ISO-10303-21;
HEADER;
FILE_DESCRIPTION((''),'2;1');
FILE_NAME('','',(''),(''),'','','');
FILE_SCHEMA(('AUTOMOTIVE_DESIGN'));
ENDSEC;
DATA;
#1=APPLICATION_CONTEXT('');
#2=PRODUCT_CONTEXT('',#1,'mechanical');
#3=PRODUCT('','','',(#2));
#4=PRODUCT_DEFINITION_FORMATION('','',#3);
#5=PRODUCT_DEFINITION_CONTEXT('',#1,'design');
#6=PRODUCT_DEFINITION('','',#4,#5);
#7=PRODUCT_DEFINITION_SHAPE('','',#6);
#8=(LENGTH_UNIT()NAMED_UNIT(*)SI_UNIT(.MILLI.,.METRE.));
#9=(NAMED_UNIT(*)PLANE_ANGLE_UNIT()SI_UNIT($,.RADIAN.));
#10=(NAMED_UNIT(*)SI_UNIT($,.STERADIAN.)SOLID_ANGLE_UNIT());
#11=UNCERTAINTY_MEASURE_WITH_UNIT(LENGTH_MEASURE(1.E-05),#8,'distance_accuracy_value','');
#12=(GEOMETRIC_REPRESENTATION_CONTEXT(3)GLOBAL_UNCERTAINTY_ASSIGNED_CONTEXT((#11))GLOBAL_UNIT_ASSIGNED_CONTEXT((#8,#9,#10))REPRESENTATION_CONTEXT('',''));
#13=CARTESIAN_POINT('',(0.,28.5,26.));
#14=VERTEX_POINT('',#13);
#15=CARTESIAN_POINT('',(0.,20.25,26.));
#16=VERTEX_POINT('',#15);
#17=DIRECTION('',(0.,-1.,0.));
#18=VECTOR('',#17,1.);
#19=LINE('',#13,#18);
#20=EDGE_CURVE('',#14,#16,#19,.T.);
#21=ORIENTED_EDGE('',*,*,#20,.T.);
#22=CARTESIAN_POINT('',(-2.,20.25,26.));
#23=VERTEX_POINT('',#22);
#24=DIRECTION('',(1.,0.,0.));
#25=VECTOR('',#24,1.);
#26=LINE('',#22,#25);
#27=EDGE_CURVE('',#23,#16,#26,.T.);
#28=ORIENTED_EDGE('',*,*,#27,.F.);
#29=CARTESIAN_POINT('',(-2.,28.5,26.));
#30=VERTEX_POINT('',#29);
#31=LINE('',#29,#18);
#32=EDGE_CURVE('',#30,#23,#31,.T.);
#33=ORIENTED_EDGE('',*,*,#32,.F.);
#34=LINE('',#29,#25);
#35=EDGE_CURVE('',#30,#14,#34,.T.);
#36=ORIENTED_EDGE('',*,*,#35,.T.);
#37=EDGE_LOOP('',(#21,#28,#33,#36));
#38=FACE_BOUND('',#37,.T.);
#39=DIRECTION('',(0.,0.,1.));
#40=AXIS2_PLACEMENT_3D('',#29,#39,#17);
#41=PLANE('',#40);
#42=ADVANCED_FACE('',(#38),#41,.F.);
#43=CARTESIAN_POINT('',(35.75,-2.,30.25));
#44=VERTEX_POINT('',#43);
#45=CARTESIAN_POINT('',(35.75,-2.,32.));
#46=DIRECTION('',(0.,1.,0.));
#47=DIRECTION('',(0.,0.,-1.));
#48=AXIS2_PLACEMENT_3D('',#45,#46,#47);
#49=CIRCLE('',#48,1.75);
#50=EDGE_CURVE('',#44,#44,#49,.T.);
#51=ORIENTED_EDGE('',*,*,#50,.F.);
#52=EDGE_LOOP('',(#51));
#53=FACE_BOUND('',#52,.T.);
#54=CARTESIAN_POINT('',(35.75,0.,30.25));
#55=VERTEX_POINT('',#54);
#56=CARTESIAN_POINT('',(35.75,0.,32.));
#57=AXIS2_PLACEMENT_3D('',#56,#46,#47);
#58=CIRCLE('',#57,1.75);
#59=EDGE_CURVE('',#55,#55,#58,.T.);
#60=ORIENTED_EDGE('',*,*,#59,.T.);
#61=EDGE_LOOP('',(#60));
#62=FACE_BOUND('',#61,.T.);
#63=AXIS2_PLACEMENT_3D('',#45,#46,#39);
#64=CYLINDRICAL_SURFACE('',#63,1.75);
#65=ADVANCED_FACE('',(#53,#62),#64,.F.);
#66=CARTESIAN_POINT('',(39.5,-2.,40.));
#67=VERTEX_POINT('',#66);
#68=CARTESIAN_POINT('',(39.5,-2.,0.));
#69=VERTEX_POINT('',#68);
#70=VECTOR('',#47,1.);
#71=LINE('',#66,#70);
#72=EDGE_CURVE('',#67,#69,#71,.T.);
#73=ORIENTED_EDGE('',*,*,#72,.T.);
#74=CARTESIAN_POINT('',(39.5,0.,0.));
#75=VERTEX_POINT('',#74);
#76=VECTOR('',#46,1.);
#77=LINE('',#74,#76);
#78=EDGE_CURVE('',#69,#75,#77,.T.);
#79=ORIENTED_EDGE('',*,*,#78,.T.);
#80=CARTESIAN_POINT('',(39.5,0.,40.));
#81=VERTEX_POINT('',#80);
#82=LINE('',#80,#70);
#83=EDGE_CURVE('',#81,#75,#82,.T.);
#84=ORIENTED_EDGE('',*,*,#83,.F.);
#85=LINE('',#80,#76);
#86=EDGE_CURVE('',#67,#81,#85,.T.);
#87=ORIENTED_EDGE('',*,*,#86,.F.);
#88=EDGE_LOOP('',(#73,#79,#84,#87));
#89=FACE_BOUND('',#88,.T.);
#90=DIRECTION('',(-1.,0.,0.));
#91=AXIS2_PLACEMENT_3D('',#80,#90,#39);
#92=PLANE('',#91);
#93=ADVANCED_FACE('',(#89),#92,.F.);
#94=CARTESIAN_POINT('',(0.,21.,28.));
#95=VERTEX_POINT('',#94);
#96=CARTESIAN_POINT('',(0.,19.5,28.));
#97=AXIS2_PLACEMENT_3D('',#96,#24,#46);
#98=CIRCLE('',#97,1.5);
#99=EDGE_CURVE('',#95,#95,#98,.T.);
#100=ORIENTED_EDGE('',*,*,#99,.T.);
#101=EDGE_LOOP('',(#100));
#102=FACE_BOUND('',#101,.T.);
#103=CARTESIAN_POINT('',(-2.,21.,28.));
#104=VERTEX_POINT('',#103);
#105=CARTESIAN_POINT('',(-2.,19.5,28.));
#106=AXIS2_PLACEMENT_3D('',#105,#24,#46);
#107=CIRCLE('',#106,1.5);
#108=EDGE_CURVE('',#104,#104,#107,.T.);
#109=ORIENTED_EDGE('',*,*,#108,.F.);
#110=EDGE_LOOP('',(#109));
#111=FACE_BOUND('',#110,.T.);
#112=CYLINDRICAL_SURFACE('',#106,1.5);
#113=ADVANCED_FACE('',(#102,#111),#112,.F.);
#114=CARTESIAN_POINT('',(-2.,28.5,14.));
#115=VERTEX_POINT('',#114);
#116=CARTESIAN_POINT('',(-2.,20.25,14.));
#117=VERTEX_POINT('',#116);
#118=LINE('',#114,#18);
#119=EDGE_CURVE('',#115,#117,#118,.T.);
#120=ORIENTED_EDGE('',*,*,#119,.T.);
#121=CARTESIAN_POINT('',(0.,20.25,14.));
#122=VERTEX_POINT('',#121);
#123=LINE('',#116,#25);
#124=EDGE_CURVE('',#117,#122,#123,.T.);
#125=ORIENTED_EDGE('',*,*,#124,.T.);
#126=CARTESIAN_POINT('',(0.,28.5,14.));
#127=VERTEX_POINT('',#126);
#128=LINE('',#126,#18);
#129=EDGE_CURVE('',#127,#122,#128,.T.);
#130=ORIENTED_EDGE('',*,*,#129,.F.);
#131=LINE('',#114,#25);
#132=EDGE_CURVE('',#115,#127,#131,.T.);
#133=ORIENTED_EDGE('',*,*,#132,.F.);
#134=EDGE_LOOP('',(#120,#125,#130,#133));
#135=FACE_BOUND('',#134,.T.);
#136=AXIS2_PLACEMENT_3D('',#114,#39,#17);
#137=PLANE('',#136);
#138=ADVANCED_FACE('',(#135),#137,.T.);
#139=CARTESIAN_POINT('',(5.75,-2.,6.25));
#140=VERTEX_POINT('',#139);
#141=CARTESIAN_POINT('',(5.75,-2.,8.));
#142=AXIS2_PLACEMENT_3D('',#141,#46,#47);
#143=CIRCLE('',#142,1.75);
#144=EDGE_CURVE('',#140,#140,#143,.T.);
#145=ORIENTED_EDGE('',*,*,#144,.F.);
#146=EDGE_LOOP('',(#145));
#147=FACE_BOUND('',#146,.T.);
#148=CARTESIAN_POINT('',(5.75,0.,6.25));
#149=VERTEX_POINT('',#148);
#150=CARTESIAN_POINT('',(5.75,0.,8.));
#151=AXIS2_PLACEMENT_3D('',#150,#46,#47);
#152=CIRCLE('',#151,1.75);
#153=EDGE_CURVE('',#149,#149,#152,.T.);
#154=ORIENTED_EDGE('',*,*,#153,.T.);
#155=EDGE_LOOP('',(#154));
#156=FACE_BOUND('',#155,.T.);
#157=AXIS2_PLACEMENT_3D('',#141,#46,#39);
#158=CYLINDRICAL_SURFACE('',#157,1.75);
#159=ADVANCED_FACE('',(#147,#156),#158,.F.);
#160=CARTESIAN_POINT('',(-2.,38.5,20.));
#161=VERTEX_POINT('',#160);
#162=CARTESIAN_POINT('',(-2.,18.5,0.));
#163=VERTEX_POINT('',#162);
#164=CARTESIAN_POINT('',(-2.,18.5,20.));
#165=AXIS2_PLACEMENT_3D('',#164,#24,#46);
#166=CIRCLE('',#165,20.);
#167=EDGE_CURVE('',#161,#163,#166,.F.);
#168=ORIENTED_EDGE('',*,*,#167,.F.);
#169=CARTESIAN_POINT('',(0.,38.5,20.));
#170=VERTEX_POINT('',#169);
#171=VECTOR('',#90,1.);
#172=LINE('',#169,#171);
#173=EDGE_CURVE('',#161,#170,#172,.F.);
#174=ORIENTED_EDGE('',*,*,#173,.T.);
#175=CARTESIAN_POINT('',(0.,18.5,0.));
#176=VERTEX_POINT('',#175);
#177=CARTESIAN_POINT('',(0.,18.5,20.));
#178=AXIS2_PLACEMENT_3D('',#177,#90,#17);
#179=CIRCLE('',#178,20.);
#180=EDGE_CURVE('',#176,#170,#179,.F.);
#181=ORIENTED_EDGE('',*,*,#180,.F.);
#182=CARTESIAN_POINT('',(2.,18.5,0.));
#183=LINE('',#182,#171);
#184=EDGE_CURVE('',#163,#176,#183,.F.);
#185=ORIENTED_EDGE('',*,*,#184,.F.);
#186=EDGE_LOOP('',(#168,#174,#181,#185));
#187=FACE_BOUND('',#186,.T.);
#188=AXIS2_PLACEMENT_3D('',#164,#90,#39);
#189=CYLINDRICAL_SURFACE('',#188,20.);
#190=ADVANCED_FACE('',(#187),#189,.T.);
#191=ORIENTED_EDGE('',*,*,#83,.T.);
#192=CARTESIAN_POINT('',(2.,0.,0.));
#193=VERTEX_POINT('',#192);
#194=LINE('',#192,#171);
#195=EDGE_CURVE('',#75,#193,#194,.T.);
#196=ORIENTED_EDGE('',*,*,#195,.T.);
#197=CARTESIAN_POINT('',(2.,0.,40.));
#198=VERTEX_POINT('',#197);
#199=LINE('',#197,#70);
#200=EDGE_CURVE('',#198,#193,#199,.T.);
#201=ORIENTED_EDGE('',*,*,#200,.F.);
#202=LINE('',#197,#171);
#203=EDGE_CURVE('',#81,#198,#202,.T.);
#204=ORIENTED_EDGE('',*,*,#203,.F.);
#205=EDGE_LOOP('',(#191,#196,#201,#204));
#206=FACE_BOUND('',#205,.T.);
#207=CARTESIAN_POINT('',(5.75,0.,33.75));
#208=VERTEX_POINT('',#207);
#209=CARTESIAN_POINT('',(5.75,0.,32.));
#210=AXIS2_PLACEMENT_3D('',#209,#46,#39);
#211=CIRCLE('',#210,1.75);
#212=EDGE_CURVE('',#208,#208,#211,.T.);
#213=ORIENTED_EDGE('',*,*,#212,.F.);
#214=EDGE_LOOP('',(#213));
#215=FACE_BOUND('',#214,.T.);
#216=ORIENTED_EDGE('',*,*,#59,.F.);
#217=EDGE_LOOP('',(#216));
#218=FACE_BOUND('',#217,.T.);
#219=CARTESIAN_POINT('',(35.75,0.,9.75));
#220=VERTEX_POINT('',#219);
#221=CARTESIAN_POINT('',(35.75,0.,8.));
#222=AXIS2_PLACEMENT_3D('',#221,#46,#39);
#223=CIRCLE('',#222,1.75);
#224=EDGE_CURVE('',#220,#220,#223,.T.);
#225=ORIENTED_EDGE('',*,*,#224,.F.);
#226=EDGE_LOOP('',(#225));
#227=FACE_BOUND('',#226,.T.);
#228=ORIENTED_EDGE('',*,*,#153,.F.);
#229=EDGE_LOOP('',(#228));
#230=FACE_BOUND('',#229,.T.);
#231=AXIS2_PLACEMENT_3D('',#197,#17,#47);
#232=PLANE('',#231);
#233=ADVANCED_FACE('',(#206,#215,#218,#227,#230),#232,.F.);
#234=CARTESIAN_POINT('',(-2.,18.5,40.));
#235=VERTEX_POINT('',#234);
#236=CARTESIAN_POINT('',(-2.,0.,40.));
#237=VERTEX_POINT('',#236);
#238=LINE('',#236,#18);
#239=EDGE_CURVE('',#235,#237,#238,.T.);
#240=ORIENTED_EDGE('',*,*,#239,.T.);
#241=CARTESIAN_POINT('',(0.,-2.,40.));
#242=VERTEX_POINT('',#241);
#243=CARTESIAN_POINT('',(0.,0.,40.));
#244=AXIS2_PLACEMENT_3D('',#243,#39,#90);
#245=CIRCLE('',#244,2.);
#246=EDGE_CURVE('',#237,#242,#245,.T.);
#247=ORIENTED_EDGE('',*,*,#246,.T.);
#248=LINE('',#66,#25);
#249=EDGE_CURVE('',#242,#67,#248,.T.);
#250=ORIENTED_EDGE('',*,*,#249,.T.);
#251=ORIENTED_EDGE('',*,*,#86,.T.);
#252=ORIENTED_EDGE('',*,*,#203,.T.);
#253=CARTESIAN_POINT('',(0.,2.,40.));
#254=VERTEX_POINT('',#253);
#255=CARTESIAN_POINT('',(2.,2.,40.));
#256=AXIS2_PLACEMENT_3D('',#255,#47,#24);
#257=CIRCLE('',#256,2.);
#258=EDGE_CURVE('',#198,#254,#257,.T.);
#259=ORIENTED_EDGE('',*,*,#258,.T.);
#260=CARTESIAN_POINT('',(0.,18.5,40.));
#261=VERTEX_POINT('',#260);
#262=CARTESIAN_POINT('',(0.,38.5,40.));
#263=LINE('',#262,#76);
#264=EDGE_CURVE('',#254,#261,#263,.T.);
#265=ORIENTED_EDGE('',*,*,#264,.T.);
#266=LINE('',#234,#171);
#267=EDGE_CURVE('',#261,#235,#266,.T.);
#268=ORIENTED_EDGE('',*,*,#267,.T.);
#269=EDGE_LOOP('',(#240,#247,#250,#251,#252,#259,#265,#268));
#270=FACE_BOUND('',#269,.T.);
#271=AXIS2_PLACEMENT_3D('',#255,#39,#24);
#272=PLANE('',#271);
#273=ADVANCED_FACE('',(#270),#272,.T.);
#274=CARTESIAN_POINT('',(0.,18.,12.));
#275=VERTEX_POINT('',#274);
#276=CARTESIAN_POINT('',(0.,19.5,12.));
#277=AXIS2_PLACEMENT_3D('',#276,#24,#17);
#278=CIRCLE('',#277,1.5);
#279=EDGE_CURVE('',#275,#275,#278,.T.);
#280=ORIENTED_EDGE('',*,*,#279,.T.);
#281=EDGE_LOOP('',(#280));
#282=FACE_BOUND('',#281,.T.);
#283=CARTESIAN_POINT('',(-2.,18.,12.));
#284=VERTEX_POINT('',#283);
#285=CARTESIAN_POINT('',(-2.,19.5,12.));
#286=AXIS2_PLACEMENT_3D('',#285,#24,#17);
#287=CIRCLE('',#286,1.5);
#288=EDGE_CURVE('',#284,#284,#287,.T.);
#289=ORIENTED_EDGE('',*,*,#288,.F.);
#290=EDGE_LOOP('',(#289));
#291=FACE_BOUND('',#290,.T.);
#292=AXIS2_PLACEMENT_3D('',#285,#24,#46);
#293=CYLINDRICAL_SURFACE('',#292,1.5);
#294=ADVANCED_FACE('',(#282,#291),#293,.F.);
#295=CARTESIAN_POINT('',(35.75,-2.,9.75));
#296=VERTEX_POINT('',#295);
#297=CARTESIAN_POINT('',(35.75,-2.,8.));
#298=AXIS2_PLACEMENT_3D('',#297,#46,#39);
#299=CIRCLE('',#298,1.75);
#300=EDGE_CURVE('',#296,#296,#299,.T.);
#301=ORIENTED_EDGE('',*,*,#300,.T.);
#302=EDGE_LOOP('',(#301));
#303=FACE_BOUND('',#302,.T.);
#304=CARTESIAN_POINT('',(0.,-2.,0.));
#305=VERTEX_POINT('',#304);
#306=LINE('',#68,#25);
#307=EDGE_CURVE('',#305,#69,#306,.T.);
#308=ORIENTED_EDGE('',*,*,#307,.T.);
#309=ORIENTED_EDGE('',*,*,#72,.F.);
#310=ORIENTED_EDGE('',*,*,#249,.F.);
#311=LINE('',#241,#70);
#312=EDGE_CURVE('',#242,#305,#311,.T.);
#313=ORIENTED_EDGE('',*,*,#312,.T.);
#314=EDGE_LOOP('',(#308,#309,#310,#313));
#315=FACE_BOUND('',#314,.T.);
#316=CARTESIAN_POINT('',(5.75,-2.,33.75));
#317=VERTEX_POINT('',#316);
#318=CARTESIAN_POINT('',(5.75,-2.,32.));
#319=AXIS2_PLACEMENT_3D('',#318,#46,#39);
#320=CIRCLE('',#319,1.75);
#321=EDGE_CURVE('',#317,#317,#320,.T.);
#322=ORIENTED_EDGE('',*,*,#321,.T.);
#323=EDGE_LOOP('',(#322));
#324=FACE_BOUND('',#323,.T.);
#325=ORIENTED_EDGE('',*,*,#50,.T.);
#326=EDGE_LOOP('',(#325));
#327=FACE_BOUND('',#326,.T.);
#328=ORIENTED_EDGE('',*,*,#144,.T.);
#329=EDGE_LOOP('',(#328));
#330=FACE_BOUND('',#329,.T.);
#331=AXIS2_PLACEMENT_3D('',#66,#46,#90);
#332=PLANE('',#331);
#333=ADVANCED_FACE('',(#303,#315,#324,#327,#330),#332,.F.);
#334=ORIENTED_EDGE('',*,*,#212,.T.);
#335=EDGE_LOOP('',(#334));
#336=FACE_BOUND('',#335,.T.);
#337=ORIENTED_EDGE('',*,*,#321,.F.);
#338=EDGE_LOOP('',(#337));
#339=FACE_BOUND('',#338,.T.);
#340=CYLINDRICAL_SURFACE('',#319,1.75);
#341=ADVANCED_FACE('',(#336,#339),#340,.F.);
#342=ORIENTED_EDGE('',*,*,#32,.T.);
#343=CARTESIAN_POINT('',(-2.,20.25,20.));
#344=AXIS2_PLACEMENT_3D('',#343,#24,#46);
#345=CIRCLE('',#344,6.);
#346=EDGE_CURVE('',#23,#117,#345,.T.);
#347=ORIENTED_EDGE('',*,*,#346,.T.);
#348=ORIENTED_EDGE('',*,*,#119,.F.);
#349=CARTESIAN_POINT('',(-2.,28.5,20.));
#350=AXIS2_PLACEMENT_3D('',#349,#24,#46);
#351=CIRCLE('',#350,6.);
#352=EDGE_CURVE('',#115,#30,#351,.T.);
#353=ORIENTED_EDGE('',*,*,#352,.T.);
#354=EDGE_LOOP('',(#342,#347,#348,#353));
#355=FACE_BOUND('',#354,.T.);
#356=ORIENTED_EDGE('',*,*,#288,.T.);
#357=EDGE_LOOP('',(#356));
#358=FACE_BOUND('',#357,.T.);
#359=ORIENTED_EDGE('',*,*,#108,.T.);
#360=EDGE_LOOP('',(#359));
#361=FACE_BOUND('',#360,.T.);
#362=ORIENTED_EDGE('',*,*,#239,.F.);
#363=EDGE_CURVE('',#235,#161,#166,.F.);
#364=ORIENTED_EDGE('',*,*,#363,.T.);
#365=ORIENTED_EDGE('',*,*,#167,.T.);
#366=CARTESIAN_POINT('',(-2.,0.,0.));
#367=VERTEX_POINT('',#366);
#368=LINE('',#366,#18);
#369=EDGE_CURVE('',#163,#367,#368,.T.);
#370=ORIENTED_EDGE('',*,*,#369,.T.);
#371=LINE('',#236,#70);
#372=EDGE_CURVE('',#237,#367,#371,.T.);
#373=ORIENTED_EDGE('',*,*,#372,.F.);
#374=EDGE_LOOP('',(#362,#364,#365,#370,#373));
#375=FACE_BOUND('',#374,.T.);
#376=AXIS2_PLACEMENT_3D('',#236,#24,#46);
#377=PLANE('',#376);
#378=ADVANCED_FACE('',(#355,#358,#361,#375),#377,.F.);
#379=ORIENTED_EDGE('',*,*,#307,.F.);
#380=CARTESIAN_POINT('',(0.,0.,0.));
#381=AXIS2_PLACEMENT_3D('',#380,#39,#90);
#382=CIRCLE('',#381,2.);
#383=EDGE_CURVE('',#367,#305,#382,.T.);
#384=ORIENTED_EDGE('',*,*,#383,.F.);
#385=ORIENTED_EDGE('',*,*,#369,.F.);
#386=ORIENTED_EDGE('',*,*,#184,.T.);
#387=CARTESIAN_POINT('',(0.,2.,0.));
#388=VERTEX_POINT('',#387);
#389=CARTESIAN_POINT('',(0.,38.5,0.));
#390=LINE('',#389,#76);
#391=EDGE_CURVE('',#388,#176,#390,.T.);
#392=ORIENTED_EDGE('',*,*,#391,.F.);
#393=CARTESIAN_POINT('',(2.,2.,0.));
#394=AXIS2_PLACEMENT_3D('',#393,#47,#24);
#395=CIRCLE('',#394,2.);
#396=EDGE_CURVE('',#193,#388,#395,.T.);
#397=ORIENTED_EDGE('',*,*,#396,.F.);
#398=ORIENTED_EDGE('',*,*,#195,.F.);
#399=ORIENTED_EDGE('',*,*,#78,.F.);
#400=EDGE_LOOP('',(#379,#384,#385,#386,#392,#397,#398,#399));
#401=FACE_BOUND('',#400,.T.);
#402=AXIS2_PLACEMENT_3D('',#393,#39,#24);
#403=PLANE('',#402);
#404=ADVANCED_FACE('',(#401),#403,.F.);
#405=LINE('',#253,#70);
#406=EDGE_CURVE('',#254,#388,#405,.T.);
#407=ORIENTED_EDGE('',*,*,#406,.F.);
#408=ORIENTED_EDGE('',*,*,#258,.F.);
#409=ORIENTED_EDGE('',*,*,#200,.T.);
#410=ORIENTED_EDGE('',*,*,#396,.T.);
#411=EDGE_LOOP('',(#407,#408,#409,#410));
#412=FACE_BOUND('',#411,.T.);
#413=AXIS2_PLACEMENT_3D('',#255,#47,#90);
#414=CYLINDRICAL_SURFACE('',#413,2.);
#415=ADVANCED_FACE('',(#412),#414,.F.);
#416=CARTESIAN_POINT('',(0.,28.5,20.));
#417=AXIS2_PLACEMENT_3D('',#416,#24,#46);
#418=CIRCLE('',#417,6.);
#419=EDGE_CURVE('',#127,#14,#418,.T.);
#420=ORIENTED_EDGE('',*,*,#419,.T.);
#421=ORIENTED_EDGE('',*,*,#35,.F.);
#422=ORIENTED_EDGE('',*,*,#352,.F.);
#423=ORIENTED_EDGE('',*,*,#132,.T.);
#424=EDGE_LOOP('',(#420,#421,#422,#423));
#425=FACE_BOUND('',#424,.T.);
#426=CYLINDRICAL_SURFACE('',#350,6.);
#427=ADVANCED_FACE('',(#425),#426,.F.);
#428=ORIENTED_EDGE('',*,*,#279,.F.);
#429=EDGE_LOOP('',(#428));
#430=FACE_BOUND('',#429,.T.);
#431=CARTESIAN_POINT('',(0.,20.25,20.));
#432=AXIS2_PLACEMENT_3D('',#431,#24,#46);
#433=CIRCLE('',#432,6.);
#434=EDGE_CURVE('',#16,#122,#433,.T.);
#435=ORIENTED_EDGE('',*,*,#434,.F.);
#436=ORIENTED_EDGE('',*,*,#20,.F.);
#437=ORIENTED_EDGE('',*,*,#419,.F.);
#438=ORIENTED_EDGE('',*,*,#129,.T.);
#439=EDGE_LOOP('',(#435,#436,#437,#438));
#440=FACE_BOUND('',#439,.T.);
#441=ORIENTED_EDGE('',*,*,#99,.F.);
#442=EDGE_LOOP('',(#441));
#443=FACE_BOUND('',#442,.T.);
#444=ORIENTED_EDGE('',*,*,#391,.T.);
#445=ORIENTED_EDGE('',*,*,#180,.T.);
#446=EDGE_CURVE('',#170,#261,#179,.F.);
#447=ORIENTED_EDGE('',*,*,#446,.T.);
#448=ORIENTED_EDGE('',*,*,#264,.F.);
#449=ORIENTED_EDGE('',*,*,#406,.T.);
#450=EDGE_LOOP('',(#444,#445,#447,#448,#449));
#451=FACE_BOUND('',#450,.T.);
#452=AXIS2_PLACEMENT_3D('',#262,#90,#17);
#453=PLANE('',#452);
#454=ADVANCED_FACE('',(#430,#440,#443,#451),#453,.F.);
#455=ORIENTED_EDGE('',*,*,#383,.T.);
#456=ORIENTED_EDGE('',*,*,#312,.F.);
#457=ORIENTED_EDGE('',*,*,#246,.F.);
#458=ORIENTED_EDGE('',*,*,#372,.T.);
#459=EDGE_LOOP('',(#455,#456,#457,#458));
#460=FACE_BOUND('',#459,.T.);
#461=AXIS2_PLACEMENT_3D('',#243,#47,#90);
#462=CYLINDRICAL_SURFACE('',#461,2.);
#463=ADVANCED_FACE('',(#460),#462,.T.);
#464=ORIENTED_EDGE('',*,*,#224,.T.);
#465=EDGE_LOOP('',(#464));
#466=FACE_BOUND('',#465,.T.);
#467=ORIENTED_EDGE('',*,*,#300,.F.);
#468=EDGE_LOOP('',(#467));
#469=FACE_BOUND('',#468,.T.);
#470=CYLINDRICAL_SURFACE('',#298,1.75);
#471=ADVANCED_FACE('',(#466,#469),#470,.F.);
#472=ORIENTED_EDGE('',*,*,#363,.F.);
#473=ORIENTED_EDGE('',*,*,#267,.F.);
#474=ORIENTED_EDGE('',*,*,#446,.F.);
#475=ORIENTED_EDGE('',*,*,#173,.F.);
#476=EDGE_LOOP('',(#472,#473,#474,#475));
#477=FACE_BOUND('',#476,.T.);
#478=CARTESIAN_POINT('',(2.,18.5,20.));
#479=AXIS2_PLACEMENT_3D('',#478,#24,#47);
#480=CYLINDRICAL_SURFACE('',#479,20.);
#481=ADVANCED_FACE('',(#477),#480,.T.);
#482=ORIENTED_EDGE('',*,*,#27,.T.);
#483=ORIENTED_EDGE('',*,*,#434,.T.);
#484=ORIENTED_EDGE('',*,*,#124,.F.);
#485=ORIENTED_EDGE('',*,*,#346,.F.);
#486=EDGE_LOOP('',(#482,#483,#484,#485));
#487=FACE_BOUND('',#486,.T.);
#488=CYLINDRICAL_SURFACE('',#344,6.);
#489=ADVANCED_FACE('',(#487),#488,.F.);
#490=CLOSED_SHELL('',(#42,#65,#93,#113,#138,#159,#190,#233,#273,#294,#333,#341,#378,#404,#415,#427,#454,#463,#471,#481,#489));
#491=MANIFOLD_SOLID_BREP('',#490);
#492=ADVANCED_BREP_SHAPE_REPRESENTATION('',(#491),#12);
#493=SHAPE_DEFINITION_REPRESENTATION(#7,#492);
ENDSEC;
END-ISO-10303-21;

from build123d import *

# Parameters (mm, degrees)
EXTRUDE_1_DEPTH     = 40
SKETCH_2_R          = 1.75
CUT_EXTRUDE_1_DEPTH = 69.135893624
CUT_EXTRUDE_2_DEPTH = 69.135893624
FILLET_1_R          = 20
FILLET_2_R          = 20
SKETCH_7_R          = 1.5
CUT_EXTRUDE_3_DEPTH = 69.135893624


with BuildPart() as part:
    # 草图1 → 凸台-拉伸1 (new body)
    with BuildSketch(Plane.XY):
        with BuildLine():
            Line((0, 38.5), (0, 2))
            ThreePointArc((0, 2), (0.585786438, 0.585786438), (2, 0))
            Line((2, 0), (39.5, 0))
            Line((39.5, 0), (39.5, -2))
            Line((39.5, -2), (0, -2))
            ThreePointArc((0, -2), (-1.414213562, -1.414213562), (-2, 0))
            Line((-2, 0), (-2, 38.5))
            Line((-2, 38.5), (0, 38.5))
        make_face()
    extrude(amount=EXTRUDE_1_DEPTH)

    # 草图2 → 切除-拉伸1 (cut, through all)
    with BuildSketch(Plane(origin=(0, 0, 0), x_dir=(1, 0, 0), z_dir=(0, 1, 0))):
        with Locations(Location((5.75, -32, 0), (0, 0, 270))):
            Circle(SKETCH_2_R)
        with Locations(Location((35.75, -32, 0), (0, 0, 90))):
            Circle(SKETCH_2_R)
        with Locations(Location((5.75, -8, 0), (0, 0, 90))):
            Circle(SKETCH_2_R)
        with Locations(Location((35.75, -8, 0), (0, 0, 270))):
            Circle(SKETCH_2_R)
    extrude(amount=-CUT_EXTRUDE_1_DEPTH, mode=Mode.SUBTRACT)

    # 草图3 → 切除-拉伸2 (cut, through all)
    with BuildSketch(Plane(origin=(0, 0, 0), x_dir=(0, 0, -1), z_dir=(1, 0, 0))):
        with BuildLine():
            Line((-14, 28.5), (-14, 20.25))
            ThreePointArc((-14, 20.25), (-20, 14.25), (-26, 20.25))
            Line((-26, 20.25), (-26, 28.5))
            ThreePointArc((-26, 28.5), (-20, 34.5), (-14, 28.5))
        make_face()
    extrude(amount=-CUT_EXTRUDE_2_DEPTH, mode=Mode.SUBTRACT)

    # 圆角1
    fillet_1_edges = [part.edges().sort_by_distance(p)[0] for p in [
        (-1, 38.5, 40),
    ]]
    fillet(fillet_1_edges, radius=FILLET_1_R)

    # 圆角2
    fillet_2_edges = [part.edges().sort_by_distance(p)[0] for p in [
        (-1, 38.5, 0),
    ]]
    fillet(fillet_2_edges, radius=FILLET_2_R - 0.0001)  # a hair under: the kernel refuses the full size

    # 草图7 → 切除-拉伸3 (cut, through all)
    with BuildSketch(Plane(origin=(0, 0, 0), x_dir=(0, 0, -1), z_dir=(1, 0, 0))):
        with Locations(Location((-28, 19.5, 0), (0, 0, 90))):
            Circle(SKETCH_7_R)
        with Locations(Location((-12, 19.5, 0), (0, 0, 270))):
            Circle(SKETCH_7_R)
    extrude(amount=-CUT_EXTRUDE_3_DEPTH, mode=Mode.SUBTRACT)


solid = part.part
